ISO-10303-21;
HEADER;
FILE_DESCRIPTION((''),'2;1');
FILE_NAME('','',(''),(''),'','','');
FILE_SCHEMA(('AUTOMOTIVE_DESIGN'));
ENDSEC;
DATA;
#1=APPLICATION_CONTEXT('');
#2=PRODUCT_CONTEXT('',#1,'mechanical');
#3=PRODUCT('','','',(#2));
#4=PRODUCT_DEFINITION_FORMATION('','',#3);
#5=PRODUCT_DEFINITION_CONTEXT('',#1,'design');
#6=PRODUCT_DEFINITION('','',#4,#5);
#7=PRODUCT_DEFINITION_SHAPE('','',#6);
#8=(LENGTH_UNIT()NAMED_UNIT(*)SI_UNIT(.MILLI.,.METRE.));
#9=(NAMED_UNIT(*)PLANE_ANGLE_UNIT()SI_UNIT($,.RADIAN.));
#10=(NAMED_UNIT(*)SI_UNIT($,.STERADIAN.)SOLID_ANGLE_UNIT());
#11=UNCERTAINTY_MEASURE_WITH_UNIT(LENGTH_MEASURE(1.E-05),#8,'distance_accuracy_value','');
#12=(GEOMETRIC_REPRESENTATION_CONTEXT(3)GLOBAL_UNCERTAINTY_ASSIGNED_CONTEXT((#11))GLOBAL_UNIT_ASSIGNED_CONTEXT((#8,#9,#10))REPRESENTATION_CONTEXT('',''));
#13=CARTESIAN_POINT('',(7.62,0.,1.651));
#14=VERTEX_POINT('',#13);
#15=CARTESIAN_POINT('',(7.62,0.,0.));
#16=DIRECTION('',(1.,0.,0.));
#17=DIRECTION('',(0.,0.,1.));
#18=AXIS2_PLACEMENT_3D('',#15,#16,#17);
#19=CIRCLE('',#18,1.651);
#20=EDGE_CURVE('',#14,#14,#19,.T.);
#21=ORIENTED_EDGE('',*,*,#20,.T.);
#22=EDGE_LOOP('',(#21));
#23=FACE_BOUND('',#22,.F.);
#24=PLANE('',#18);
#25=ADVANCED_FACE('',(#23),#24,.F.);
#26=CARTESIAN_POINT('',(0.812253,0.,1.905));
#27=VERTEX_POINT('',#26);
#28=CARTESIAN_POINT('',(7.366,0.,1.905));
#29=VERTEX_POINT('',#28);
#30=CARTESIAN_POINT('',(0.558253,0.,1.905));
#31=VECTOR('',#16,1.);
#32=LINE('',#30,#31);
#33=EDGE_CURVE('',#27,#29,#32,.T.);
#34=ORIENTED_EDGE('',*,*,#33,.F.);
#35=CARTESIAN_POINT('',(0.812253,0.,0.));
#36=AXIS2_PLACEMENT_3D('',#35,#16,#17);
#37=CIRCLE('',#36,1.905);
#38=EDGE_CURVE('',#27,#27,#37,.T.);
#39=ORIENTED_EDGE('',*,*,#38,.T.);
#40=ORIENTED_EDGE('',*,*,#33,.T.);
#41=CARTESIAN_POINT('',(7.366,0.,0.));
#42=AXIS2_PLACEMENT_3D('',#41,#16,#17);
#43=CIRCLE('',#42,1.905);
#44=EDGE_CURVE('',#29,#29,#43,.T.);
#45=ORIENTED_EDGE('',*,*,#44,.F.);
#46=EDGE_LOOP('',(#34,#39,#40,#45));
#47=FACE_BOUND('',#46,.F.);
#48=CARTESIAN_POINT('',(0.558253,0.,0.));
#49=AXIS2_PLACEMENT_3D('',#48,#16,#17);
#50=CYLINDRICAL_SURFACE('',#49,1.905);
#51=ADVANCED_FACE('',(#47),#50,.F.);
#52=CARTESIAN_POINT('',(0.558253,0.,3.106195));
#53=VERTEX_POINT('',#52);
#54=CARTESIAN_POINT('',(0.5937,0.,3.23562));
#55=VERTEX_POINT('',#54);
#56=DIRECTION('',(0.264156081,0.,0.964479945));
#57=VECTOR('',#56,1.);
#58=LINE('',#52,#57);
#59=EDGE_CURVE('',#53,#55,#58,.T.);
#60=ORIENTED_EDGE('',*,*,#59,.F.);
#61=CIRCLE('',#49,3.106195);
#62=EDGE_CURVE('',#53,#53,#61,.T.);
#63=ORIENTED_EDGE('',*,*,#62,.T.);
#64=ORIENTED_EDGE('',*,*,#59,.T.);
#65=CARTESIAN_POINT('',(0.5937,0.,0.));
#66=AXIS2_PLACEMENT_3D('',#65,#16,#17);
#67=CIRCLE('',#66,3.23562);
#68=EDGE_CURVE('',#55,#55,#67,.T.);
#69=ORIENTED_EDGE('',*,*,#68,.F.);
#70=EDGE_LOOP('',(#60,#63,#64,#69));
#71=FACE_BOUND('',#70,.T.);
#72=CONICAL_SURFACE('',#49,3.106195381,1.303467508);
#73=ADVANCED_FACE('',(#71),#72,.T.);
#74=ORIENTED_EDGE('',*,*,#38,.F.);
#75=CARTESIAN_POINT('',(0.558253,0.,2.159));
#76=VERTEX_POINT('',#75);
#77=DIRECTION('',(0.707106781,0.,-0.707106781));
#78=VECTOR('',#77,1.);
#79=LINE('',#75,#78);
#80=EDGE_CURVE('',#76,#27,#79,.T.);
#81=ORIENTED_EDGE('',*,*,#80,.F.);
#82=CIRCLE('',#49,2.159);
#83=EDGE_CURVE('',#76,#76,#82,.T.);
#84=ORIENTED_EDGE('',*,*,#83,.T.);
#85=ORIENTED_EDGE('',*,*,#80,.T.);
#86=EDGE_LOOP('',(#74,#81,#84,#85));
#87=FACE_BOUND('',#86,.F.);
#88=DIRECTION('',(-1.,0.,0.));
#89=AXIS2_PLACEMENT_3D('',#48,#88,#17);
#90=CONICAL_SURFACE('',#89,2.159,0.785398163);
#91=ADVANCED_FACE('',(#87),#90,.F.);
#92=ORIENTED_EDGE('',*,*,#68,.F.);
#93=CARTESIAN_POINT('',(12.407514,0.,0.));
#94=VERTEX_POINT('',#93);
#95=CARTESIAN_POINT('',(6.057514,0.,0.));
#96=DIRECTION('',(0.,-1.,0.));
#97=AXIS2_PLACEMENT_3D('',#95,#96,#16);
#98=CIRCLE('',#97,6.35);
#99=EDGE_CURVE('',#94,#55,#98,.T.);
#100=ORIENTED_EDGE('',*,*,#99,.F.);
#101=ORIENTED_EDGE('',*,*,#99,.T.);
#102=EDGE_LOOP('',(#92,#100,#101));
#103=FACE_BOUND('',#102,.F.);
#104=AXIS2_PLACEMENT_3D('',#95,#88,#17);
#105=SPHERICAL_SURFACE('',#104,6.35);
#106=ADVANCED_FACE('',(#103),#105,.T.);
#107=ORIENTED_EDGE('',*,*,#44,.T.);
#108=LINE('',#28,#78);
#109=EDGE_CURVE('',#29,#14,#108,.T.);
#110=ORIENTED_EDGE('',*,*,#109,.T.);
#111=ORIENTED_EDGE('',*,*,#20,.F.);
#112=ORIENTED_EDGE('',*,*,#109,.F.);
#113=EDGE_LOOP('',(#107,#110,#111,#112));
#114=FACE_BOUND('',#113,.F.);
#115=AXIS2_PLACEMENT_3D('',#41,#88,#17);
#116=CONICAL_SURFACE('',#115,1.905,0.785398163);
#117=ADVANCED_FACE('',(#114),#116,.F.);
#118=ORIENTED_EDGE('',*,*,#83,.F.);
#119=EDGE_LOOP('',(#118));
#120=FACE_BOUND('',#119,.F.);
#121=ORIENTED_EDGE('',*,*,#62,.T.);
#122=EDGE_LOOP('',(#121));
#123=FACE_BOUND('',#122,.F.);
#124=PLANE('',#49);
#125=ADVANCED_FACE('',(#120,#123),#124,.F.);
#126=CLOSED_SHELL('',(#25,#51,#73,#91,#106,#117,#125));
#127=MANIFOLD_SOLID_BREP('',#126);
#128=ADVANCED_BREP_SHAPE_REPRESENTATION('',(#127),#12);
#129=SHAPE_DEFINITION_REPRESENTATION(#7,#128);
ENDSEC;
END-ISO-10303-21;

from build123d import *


# Not quite as in the source:
# - a fillet or chamfer that OpenCascade refuses, or shapes differently, is made with other operations: its cross-section is extruded or revolved along the edge and cut away or added


with BuildPart() as f1:
    # F0 (on Front) → F1 (revolve)
    with BuildSketch(Plane.XZ):
        with BuildLine():
            Line((7.62, 0), (12.407513929, 0))
            ThreePointArc((12.407513929, 0), (7.7010148654, 6.1336289969), (0.558252615, 3.175))
            Line((0.558252615, 3.175), (0.558252615, 1.905))
            Line((0.558252615, 1.905), (7.62, 1.905))
            Line((7.62, 1.905), (7.62, 0))
        make_face()
    revolve(axis=Axis((8.8458018737, 0, 0), (1, 0, 0)))

    # F2: chamfer of 0.254 on 3 edges, made by hand

    # F2_s1 → F2_t2 (revolve)
    with BuildSketch(Plane.XZ):
        Polygon((7.366, 1.905), (7.62, 1.651), (7.62, 1.905), align=None)
    revolve(axis=Axis((7.62, 0, 0), (1, 0, 0)))

    # F2_s3 → F2_t4 (revolve, cut)
    with BuildSketch(Plane.XZ):
        with BuildLine():
            Line((0.558252615, 3.1061953814), (0.5937000602, 3.235620189))
            ThreePointArc((0.5937000602, 3.235620189), (0.5783706102, 3.2095931974), (0.558252615, 3.175))
            Line((0.558252615, 3.175), (0.558252615, 3.1061953814))
        make_face()
    revolve(axis=Axis((0.558252615, 0, 0), (1, 0, 0)), mode=Mode.SUBTRACT)

    # F2_s5 → F2_t6 (revolve, cut)
    with BuildSketch(Plane.XZ):
        Polygon((0.558252615, 2.159), (0.812252615, 1.905), (0.558252615, 1.905), align=None)
    revolve(axis=Axis((0.558252615, 0, 0), (1, 0, 0)), mode=Mode.SUBTRACT)


solid = f1.part
